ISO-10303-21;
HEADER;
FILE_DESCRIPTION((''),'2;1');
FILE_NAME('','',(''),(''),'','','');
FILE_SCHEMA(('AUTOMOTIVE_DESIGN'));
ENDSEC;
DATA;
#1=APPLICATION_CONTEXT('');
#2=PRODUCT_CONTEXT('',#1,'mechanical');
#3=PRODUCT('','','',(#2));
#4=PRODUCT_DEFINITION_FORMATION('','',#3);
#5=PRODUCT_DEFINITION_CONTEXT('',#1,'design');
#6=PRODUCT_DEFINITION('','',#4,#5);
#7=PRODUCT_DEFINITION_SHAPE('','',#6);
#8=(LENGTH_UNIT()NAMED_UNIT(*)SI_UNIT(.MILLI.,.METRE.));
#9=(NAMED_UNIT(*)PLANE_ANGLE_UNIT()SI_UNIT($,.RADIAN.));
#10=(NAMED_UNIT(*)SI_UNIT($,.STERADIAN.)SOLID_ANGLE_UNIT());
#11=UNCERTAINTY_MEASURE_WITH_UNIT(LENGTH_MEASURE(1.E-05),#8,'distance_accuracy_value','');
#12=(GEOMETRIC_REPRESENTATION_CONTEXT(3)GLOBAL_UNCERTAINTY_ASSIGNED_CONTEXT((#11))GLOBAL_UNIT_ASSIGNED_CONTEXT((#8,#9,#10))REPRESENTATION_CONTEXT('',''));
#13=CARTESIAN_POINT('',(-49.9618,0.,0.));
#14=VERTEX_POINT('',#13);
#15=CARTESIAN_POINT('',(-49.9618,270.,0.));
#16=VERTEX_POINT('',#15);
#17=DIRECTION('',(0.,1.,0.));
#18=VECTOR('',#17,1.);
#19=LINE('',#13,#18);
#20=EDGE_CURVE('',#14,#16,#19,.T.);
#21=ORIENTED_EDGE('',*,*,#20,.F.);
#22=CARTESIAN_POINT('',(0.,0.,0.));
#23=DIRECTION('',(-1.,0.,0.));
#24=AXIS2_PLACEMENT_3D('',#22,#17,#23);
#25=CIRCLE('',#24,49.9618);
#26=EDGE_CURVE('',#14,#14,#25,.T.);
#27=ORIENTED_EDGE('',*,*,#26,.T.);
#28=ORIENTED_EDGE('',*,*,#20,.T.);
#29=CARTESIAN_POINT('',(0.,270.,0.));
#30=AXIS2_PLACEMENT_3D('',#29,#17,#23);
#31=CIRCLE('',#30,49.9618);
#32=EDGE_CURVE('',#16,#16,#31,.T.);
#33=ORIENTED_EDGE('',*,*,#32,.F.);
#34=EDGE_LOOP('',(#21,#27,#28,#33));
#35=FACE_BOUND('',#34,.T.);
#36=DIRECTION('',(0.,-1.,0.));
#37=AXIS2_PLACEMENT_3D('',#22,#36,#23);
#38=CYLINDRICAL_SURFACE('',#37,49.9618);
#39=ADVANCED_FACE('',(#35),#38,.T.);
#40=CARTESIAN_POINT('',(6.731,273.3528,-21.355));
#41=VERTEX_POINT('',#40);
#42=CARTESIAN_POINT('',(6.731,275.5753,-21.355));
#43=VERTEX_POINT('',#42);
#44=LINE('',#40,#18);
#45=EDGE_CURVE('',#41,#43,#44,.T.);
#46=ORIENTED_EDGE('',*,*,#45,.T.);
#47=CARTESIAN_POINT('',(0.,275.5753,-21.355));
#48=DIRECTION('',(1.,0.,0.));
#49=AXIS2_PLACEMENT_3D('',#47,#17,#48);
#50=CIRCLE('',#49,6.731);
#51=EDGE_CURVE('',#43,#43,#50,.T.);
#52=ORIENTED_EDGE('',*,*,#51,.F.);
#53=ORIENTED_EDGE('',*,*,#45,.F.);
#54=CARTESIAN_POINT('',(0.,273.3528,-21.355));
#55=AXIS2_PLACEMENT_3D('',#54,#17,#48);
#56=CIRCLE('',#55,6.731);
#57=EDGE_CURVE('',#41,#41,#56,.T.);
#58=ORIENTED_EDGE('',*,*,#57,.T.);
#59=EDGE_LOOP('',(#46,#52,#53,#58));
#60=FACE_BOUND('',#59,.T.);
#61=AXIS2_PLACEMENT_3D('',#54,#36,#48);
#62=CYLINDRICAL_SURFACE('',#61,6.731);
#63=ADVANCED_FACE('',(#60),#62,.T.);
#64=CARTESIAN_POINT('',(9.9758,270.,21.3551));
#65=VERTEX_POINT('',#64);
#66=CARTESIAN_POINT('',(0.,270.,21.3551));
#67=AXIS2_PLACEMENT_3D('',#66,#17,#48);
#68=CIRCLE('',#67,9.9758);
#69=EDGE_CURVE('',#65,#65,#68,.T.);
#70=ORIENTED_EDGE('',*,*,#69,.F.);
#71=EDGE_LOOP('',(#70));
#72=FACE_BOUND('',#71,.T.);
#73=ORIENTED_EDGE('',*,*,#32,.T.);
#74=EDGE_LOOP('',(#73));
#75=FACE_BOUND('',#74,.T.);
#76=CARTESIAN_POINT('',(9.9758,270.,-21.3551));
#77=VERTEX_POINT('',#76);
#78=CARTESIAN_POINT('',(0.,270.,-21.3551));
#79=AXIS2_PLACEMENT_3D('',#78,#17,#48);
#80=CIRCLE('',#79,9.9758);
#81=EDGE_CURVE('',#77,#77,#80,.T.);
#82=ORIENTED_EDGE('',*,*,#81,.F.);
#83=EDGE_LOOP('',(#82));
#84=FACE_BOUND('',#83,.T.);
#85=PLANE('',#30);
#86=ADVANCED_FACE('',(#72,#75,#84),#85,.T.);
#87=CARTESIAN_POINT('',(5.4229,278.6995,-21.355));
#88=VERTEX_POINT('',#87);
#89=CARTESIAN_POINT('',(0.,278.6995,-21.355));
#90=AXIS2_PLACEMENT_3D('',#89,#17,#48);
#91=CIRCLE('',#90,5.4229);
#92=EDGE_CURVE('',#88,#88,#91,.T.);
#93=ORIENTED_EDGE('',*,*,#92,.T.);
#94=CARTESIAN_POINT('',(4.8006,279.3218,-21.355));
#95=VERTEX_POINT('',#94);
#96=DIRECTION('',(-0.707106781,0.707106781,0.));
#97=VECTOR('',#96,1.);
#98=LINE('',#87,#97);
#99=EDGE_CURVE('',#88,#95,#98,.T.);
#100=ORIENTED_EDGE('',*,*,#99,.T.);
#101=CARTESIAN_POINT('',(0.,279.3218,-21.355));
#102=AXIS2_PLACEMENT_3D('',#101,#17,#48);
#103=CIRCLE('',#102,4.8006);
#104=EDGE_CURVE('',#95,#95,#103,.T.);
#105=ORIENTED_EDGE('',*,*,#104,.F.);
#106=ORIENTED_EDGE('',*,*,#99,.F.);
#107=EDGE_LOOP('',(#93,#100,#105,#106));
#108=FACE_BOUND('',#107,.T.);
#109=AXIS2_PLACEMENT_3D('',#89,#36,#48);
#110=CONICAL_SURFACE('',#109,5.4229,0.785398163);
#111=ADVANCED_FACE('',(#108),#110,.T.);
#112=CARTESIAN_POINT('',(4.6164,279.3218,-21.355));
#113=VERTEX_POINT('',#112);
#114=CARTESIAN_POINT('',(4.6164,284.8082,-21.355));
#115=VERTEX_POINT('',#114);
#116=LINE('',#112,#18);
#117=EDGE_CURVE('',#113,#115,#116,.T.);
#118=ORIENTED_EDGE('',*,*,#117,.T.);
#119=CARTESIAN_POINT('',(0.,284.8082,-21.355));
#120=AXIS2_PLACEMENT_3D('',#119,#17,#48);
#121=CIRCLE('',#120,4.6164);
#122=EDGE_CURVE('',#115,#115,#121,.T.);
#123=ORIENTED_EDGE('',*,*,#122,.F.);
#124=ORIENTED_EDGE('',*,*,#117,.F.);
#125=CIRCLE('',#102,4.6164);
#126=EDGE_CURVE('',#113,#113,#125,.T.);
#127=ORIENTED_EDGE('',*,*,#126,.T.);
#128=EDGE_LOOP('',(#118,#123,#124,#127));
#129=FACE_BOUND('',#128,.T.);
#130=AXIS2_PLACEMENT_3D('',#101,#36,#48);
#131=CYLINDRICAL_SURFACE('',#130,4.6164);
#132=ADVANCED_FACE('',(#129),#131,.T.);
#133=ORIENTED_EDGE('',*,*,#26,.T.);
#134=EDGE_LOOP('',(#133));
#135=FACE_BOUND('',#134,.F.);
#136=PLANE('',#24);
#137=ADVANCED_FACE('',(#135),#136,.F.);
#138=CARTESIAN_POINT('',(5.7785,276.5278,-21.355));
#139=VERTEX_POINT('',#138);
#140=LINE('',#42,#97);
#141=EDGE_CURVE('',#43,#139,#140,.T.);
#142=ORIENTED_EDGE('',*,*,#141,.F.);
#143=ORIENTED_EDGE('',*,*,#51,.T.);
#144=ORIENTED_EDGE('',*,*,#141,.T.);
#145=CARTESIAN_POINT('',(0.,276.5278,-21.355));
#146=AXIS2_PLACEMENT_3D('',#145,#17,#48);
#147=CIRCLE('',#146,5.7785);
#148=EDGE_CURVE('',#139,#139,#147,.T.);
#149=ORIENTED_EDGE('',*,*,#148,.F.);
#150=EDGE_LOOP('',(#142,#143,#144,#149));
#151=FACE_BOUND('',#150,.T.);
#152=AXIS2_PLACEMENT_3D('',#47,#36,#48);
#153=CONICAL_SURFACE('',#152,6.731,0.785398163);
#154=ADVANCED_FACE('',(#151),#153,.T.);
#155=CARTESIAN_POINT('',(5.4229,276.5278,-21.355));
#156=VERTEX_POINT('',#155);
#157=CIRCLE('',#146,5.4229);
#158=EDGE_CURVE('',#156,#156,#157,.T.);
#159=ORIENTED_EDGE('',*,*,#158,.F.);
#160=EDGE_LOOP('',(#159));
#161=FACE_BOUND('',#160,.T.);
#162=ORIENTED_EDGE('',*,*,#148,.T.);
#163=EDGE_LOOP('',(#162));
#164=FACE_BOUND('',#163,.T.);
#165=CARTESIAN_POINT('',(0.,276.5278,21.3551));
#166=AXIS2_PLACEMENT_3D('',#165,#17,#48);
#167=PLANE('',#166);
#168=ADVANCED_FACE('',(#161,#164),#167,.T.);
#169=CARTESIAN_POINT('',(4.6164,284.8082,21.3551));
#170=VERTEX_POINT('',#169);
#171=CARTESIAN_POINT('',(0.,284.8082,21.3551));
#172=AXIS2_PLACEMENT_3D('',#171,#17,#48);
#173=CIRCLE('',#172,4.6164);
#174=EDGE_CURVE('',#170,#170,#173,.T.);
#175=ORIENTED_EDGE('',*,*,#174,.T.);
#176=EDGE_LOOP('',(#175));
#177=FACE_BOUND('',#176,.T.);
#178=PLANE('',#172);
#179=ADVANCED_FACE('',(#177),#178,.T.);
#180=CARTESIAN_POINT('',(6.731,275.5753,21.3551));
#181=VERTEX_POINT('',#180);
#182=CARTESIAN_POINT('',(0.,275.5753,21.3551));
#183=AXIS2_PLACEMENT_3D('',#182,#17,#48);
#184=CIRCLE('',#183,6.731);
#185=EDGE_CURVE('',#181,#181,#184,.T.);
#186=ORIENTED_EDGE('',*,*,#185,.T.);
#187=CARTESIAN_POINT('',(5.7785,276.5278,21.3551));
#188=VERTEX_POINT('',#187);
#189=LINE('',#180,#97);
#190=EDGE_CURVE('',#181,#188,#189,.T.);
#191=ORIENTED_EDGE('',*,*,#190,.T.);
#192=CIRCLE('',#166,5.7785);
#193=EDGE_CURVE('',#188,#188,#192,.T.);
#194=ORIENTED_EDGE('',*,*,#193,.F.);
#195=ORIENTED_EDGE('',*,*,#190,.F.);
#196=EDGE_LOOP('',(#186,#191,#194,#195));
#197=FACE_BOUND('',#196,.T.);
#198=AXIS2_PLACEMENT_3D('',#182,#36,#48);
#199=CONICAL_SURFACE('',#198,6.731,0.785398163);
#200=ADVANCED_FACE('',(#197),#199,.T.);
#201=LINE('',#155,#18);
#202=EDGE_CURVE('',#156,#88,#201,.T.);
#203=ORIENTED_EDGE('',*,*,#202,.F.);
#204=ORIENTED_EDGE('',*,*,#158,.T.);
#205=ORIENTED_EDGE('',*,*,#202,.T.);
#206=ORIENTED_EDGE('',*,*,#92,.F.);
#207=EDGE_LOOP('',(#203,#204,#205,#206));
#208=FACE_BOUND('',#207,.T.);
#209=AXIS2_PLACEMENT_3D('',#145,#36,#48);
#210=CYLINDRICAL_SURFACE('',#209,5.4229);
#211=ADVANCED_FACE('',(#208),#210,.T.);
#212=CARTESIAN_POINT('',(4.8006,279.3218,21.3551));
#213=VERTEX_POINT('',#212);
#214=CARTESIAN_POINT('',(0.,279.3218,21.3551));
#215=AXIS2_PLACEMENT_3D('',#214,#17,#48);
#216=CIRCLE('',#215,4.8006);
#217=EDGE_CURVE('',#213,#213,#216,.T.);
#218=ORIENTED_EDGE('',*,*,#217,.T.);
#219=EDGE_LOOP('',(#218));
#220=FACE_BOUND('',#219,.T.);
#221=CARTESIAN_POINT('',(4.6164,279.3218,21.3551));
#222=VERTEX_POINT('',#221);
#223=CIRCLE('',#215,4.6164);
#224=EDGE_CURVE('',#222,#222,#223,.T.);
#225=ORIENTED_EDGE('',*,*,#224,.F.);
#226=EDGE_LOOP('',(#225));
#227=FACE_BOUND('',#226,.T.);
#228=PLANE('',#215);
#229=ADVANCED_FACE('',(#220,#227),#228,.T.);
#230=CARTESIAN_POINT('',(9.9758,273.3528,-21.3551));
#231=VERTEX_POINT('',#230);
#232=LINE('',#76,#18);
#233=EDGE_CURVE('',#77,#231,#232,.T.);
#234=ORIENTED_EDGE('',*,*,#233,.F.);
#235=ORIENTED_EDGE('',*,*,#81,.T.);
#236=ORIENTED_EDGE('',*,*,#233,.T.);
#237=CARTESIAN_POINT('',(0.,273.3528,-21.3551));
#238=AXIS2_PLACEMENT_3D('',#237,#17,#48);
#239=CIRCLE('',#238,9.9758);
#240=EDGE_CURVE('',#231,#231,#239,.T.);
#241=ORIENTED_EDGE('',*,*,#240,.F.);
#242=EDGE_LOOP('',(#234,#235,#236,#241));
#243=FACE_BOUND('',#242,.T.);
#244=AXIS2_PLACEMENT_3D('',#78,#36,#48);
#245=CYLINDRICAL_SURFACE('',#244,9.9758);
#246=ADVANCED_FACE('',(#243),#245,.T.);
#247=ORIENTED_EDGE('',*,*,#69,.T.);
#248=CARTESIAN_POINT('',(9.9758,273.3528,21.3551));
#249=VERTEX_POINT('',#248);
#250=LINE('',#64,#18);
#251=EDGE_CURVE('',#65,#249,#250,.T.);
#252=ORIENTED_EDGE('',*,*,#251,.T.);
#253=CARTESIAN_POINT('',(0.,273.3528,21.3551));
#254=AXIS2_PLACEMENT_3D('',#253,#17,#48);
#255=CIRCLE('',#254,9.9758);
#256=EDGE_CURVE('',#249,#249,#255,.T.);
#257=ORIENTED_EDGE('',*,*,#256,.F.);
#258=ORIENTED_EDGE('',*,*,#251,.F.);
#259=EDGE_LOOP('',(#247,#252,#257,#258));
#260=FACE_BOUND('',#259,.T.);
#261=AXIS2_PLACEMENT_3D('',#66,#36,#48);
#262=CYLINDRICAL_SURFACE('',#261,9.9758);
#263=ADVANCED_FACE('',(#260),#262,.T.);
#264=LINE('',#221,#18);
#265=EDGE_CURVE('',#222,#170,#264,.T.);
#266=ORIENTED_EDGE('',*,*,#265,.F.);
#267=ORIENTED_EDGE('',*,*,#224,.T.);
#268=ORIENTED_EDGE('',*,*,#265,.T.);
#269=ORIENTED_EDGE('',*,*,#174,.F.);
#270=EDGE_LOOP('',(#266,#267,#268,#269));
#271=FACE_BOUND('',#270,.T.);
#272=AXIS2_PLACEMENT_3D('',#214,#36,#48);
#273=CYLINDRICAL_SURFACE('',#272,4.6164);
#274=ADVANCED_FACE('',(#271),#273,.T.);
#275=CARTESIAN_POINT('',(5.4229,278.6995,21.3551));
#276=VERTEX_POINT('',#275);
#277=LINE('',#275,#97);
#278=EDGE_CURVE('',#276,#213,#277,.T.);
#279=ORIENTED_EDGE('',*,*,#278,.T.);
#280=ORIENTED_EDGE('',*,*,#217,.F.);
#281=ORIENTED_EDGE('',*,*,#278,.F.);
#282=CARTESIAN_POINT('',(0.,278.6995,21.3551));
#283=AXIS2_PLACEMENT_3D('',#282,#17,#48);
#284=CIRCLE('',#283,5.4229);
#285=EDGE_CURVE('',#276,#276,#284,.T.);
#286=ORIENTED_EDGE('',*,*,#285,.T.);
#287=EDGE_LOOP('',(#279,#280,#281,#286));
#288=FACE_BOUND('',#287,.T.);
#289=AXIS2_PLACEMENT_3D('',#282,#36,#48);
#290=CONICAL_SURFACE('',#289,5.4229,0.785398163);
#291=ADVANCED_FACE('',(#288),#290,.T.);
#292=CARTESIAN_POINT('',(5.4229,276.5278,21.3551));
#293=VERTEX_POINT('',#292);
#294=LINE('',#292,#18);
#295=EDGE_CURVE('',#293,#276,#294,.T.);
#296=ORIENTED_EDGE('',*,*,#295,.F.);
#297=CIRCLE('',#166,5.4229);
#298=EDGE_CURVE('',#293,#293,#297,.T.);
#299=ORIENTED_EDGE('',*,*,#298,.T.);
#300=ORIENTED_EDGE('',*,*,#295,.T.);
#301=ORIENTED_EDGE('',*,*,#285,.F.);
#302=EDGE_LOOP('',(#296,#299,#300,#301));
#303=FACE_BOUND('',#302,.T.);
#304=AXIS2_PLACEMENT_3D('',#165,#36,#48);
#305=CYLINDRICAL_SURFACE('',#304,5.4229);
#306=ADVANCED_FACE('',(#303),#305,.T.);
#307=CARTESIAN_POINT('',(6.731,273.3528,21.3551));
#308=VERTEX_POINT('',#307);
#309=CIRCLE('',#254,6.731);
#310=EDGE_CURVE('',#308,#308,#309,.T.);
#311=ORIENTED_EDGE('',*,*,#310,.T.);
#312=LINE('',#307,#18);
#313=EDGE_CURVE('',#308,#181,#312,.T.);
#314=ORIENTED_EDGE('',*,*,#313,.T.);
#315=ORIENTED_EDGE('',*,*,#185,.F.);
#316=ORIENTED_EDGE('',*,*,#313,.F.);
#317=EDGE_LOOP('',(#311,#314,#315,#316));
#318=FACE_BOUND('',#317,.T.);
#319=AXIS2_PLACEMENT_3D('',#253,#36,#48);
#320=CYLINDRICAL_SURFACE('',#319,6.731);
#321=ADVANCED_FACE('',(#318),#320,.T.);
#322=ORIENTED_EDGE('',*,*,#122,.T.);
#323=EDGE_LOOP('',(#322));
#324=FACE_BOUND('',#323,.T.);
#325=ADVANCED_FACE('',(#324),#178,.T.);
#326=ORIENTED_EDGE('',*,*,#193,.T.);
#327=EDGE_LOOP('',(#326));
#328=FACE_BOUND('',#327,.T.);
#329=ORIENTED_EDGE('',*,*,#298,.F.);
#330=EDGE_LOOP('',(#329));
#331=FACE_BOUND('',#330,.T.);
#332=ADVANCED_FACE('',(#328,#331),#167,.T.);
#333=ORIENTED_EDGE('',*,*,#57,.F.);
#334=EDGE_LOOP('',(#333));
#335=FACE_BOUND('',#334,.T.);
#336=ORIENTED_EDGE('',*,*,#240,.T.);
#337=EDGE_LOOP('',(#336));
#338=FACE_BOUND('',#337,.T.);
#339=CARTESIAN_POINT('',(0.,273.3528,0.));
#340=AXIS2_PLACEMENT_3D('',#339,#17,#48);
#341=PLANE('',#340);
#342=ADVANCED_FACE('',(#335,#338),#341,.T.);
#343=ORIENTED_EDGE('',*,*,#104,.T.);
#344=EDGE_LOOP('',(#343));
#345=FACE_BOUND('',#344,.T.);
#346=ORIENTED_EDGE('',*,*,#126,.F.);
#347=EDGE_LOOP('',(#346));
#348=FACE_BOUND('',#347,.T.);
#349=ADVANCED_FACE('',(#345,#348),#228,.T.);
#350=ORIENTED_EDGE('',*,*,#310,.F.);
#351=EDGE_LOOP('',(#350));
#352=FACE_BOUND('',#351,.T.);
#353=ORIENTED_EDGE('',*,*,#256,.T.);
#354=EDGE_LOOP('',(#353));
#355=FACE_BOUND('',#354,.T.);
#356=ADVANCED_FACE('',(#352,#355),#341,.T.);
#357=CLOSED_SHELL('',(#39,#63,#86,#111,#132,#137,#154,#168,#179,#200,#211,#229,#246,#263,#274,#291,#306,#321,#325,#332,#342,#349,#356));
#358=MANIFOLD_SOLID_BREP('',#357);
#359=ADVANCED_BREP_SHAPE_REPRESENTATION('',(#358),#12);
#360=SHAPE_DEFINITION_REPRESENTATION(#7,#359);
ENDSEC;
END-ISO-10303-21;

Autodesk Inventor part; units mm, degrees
ref_plane "YZ Plane" through (0, 0, 0) normal (1, 0, 0) x (0, 1, 0)
ref_plane "XZ Plane" through (0, 0, 0) normal (0, 1, 0) x (-1, 0, 0)
ref_plane "XY Plane" through (0, 0, 0) normal (0, 0, 1) x (1, 0, 0)
sketch "Sketch1" plane through (0, 0, 0) normal (0, 1, 0) x (-1, 0, 0)
  circle A0 centre (0, 0) radius 49.9618
  dimension "Diameter" = 99.9236
extrude "Extrusion1" add sketch "Sketch1" along normal blind 270
sketch "Sketch2" plane through (0, 270, 0) normal (0, 1, 0) x (1, 0, 0)
  circle A0 centre (0, -21.3551) radius 9.9758
  circle A1 centre (0, 21.3551) radius 9.9758
  line L0 (0, -21.3551) -> (0, 21.3551) construction
  point P0 (0, 0)
  point P1 (0, 0)
  dimension "d3" = 19.9517
  dimension "d6" = 42.7101
extrude "Extrusion2" add sketch "Sketch2" along normal blind 3.3528
sketch "Sketch3" plane through (0, 273.3528, 21.3551) normal (0, 1, 0) x (1, 0, 0)
  circle A0 centre (0, 42.7101) radius 9.9758 construction
  circle A1 centre (0, 0) radius 9.9758 construction
  circle A2 centre (0, 42.7101) radius 6.731
  circle A3 centre (0, 0) radius 6.731
  point P0 (0, 21.3551)
  dimension "d7" = 13.462
extrude "Extrusion3" add sketch "Sketch3" along normal blind 3.175
sketch "Sketch4" plane through (0, 276.5278, 21.3551) normal (0, 1, 0) x (1, 0, 0)
  circle A0 centre (0, 42.7101) radius 6.731 construction
  circle A1 centre (0, 0) radius 6.731 construction
  circle A2 centre (0, 42.7101) radius 5.4229
  circle A3 centre (0, 0) radius 5.4229
  point P0 (0, 21.3551)
  dimension "d10" = 10.8458
extrude "Extrusion4" add sketch "Sketch4" along normal blind 2.794
sketch "Sketch5" plane through (0, 279.3218, 21.3551) normal (0, 1, 0) x (1, 0, 0)
  circle A0 centre (0, 42.7101) radius 5.4229 construction
  circle A1 centre (0, 0) radius 5.4229 construction
  circle A2 centre (0, 42.7101) radius 4.6164
  circle A3 centre (0, 0) radius 4.6164
  point P0 (0, 21.3551)
  dimension "d13" = 9.2329
extrude "Extrusion5" add sketch "Sketch5" along normal blind 5.4864
thread "Thread1" size "9/16-28 UN" class "2A" standard "ANSI Unified Screw Threads" full length
thread "Thread2" size "9/16-28 UN" class "2A" standard "ANSI Unified Screw Threads" full length
chamfer "Chamfer1" distance 0.9525 angle 45 2 edges at (-6.731, 276.5278, -21.3551) (-6.731, 276.5278, 21.3551)
chamfer "Chamfer2" distance 0.6223 angle 45 2 edges at (-5.4229, 279.3218, 21.3551) (-5.4229, 279.3218, -21.3551)
properties part number "3.5F_Cap" material "Aluminum 6061"
